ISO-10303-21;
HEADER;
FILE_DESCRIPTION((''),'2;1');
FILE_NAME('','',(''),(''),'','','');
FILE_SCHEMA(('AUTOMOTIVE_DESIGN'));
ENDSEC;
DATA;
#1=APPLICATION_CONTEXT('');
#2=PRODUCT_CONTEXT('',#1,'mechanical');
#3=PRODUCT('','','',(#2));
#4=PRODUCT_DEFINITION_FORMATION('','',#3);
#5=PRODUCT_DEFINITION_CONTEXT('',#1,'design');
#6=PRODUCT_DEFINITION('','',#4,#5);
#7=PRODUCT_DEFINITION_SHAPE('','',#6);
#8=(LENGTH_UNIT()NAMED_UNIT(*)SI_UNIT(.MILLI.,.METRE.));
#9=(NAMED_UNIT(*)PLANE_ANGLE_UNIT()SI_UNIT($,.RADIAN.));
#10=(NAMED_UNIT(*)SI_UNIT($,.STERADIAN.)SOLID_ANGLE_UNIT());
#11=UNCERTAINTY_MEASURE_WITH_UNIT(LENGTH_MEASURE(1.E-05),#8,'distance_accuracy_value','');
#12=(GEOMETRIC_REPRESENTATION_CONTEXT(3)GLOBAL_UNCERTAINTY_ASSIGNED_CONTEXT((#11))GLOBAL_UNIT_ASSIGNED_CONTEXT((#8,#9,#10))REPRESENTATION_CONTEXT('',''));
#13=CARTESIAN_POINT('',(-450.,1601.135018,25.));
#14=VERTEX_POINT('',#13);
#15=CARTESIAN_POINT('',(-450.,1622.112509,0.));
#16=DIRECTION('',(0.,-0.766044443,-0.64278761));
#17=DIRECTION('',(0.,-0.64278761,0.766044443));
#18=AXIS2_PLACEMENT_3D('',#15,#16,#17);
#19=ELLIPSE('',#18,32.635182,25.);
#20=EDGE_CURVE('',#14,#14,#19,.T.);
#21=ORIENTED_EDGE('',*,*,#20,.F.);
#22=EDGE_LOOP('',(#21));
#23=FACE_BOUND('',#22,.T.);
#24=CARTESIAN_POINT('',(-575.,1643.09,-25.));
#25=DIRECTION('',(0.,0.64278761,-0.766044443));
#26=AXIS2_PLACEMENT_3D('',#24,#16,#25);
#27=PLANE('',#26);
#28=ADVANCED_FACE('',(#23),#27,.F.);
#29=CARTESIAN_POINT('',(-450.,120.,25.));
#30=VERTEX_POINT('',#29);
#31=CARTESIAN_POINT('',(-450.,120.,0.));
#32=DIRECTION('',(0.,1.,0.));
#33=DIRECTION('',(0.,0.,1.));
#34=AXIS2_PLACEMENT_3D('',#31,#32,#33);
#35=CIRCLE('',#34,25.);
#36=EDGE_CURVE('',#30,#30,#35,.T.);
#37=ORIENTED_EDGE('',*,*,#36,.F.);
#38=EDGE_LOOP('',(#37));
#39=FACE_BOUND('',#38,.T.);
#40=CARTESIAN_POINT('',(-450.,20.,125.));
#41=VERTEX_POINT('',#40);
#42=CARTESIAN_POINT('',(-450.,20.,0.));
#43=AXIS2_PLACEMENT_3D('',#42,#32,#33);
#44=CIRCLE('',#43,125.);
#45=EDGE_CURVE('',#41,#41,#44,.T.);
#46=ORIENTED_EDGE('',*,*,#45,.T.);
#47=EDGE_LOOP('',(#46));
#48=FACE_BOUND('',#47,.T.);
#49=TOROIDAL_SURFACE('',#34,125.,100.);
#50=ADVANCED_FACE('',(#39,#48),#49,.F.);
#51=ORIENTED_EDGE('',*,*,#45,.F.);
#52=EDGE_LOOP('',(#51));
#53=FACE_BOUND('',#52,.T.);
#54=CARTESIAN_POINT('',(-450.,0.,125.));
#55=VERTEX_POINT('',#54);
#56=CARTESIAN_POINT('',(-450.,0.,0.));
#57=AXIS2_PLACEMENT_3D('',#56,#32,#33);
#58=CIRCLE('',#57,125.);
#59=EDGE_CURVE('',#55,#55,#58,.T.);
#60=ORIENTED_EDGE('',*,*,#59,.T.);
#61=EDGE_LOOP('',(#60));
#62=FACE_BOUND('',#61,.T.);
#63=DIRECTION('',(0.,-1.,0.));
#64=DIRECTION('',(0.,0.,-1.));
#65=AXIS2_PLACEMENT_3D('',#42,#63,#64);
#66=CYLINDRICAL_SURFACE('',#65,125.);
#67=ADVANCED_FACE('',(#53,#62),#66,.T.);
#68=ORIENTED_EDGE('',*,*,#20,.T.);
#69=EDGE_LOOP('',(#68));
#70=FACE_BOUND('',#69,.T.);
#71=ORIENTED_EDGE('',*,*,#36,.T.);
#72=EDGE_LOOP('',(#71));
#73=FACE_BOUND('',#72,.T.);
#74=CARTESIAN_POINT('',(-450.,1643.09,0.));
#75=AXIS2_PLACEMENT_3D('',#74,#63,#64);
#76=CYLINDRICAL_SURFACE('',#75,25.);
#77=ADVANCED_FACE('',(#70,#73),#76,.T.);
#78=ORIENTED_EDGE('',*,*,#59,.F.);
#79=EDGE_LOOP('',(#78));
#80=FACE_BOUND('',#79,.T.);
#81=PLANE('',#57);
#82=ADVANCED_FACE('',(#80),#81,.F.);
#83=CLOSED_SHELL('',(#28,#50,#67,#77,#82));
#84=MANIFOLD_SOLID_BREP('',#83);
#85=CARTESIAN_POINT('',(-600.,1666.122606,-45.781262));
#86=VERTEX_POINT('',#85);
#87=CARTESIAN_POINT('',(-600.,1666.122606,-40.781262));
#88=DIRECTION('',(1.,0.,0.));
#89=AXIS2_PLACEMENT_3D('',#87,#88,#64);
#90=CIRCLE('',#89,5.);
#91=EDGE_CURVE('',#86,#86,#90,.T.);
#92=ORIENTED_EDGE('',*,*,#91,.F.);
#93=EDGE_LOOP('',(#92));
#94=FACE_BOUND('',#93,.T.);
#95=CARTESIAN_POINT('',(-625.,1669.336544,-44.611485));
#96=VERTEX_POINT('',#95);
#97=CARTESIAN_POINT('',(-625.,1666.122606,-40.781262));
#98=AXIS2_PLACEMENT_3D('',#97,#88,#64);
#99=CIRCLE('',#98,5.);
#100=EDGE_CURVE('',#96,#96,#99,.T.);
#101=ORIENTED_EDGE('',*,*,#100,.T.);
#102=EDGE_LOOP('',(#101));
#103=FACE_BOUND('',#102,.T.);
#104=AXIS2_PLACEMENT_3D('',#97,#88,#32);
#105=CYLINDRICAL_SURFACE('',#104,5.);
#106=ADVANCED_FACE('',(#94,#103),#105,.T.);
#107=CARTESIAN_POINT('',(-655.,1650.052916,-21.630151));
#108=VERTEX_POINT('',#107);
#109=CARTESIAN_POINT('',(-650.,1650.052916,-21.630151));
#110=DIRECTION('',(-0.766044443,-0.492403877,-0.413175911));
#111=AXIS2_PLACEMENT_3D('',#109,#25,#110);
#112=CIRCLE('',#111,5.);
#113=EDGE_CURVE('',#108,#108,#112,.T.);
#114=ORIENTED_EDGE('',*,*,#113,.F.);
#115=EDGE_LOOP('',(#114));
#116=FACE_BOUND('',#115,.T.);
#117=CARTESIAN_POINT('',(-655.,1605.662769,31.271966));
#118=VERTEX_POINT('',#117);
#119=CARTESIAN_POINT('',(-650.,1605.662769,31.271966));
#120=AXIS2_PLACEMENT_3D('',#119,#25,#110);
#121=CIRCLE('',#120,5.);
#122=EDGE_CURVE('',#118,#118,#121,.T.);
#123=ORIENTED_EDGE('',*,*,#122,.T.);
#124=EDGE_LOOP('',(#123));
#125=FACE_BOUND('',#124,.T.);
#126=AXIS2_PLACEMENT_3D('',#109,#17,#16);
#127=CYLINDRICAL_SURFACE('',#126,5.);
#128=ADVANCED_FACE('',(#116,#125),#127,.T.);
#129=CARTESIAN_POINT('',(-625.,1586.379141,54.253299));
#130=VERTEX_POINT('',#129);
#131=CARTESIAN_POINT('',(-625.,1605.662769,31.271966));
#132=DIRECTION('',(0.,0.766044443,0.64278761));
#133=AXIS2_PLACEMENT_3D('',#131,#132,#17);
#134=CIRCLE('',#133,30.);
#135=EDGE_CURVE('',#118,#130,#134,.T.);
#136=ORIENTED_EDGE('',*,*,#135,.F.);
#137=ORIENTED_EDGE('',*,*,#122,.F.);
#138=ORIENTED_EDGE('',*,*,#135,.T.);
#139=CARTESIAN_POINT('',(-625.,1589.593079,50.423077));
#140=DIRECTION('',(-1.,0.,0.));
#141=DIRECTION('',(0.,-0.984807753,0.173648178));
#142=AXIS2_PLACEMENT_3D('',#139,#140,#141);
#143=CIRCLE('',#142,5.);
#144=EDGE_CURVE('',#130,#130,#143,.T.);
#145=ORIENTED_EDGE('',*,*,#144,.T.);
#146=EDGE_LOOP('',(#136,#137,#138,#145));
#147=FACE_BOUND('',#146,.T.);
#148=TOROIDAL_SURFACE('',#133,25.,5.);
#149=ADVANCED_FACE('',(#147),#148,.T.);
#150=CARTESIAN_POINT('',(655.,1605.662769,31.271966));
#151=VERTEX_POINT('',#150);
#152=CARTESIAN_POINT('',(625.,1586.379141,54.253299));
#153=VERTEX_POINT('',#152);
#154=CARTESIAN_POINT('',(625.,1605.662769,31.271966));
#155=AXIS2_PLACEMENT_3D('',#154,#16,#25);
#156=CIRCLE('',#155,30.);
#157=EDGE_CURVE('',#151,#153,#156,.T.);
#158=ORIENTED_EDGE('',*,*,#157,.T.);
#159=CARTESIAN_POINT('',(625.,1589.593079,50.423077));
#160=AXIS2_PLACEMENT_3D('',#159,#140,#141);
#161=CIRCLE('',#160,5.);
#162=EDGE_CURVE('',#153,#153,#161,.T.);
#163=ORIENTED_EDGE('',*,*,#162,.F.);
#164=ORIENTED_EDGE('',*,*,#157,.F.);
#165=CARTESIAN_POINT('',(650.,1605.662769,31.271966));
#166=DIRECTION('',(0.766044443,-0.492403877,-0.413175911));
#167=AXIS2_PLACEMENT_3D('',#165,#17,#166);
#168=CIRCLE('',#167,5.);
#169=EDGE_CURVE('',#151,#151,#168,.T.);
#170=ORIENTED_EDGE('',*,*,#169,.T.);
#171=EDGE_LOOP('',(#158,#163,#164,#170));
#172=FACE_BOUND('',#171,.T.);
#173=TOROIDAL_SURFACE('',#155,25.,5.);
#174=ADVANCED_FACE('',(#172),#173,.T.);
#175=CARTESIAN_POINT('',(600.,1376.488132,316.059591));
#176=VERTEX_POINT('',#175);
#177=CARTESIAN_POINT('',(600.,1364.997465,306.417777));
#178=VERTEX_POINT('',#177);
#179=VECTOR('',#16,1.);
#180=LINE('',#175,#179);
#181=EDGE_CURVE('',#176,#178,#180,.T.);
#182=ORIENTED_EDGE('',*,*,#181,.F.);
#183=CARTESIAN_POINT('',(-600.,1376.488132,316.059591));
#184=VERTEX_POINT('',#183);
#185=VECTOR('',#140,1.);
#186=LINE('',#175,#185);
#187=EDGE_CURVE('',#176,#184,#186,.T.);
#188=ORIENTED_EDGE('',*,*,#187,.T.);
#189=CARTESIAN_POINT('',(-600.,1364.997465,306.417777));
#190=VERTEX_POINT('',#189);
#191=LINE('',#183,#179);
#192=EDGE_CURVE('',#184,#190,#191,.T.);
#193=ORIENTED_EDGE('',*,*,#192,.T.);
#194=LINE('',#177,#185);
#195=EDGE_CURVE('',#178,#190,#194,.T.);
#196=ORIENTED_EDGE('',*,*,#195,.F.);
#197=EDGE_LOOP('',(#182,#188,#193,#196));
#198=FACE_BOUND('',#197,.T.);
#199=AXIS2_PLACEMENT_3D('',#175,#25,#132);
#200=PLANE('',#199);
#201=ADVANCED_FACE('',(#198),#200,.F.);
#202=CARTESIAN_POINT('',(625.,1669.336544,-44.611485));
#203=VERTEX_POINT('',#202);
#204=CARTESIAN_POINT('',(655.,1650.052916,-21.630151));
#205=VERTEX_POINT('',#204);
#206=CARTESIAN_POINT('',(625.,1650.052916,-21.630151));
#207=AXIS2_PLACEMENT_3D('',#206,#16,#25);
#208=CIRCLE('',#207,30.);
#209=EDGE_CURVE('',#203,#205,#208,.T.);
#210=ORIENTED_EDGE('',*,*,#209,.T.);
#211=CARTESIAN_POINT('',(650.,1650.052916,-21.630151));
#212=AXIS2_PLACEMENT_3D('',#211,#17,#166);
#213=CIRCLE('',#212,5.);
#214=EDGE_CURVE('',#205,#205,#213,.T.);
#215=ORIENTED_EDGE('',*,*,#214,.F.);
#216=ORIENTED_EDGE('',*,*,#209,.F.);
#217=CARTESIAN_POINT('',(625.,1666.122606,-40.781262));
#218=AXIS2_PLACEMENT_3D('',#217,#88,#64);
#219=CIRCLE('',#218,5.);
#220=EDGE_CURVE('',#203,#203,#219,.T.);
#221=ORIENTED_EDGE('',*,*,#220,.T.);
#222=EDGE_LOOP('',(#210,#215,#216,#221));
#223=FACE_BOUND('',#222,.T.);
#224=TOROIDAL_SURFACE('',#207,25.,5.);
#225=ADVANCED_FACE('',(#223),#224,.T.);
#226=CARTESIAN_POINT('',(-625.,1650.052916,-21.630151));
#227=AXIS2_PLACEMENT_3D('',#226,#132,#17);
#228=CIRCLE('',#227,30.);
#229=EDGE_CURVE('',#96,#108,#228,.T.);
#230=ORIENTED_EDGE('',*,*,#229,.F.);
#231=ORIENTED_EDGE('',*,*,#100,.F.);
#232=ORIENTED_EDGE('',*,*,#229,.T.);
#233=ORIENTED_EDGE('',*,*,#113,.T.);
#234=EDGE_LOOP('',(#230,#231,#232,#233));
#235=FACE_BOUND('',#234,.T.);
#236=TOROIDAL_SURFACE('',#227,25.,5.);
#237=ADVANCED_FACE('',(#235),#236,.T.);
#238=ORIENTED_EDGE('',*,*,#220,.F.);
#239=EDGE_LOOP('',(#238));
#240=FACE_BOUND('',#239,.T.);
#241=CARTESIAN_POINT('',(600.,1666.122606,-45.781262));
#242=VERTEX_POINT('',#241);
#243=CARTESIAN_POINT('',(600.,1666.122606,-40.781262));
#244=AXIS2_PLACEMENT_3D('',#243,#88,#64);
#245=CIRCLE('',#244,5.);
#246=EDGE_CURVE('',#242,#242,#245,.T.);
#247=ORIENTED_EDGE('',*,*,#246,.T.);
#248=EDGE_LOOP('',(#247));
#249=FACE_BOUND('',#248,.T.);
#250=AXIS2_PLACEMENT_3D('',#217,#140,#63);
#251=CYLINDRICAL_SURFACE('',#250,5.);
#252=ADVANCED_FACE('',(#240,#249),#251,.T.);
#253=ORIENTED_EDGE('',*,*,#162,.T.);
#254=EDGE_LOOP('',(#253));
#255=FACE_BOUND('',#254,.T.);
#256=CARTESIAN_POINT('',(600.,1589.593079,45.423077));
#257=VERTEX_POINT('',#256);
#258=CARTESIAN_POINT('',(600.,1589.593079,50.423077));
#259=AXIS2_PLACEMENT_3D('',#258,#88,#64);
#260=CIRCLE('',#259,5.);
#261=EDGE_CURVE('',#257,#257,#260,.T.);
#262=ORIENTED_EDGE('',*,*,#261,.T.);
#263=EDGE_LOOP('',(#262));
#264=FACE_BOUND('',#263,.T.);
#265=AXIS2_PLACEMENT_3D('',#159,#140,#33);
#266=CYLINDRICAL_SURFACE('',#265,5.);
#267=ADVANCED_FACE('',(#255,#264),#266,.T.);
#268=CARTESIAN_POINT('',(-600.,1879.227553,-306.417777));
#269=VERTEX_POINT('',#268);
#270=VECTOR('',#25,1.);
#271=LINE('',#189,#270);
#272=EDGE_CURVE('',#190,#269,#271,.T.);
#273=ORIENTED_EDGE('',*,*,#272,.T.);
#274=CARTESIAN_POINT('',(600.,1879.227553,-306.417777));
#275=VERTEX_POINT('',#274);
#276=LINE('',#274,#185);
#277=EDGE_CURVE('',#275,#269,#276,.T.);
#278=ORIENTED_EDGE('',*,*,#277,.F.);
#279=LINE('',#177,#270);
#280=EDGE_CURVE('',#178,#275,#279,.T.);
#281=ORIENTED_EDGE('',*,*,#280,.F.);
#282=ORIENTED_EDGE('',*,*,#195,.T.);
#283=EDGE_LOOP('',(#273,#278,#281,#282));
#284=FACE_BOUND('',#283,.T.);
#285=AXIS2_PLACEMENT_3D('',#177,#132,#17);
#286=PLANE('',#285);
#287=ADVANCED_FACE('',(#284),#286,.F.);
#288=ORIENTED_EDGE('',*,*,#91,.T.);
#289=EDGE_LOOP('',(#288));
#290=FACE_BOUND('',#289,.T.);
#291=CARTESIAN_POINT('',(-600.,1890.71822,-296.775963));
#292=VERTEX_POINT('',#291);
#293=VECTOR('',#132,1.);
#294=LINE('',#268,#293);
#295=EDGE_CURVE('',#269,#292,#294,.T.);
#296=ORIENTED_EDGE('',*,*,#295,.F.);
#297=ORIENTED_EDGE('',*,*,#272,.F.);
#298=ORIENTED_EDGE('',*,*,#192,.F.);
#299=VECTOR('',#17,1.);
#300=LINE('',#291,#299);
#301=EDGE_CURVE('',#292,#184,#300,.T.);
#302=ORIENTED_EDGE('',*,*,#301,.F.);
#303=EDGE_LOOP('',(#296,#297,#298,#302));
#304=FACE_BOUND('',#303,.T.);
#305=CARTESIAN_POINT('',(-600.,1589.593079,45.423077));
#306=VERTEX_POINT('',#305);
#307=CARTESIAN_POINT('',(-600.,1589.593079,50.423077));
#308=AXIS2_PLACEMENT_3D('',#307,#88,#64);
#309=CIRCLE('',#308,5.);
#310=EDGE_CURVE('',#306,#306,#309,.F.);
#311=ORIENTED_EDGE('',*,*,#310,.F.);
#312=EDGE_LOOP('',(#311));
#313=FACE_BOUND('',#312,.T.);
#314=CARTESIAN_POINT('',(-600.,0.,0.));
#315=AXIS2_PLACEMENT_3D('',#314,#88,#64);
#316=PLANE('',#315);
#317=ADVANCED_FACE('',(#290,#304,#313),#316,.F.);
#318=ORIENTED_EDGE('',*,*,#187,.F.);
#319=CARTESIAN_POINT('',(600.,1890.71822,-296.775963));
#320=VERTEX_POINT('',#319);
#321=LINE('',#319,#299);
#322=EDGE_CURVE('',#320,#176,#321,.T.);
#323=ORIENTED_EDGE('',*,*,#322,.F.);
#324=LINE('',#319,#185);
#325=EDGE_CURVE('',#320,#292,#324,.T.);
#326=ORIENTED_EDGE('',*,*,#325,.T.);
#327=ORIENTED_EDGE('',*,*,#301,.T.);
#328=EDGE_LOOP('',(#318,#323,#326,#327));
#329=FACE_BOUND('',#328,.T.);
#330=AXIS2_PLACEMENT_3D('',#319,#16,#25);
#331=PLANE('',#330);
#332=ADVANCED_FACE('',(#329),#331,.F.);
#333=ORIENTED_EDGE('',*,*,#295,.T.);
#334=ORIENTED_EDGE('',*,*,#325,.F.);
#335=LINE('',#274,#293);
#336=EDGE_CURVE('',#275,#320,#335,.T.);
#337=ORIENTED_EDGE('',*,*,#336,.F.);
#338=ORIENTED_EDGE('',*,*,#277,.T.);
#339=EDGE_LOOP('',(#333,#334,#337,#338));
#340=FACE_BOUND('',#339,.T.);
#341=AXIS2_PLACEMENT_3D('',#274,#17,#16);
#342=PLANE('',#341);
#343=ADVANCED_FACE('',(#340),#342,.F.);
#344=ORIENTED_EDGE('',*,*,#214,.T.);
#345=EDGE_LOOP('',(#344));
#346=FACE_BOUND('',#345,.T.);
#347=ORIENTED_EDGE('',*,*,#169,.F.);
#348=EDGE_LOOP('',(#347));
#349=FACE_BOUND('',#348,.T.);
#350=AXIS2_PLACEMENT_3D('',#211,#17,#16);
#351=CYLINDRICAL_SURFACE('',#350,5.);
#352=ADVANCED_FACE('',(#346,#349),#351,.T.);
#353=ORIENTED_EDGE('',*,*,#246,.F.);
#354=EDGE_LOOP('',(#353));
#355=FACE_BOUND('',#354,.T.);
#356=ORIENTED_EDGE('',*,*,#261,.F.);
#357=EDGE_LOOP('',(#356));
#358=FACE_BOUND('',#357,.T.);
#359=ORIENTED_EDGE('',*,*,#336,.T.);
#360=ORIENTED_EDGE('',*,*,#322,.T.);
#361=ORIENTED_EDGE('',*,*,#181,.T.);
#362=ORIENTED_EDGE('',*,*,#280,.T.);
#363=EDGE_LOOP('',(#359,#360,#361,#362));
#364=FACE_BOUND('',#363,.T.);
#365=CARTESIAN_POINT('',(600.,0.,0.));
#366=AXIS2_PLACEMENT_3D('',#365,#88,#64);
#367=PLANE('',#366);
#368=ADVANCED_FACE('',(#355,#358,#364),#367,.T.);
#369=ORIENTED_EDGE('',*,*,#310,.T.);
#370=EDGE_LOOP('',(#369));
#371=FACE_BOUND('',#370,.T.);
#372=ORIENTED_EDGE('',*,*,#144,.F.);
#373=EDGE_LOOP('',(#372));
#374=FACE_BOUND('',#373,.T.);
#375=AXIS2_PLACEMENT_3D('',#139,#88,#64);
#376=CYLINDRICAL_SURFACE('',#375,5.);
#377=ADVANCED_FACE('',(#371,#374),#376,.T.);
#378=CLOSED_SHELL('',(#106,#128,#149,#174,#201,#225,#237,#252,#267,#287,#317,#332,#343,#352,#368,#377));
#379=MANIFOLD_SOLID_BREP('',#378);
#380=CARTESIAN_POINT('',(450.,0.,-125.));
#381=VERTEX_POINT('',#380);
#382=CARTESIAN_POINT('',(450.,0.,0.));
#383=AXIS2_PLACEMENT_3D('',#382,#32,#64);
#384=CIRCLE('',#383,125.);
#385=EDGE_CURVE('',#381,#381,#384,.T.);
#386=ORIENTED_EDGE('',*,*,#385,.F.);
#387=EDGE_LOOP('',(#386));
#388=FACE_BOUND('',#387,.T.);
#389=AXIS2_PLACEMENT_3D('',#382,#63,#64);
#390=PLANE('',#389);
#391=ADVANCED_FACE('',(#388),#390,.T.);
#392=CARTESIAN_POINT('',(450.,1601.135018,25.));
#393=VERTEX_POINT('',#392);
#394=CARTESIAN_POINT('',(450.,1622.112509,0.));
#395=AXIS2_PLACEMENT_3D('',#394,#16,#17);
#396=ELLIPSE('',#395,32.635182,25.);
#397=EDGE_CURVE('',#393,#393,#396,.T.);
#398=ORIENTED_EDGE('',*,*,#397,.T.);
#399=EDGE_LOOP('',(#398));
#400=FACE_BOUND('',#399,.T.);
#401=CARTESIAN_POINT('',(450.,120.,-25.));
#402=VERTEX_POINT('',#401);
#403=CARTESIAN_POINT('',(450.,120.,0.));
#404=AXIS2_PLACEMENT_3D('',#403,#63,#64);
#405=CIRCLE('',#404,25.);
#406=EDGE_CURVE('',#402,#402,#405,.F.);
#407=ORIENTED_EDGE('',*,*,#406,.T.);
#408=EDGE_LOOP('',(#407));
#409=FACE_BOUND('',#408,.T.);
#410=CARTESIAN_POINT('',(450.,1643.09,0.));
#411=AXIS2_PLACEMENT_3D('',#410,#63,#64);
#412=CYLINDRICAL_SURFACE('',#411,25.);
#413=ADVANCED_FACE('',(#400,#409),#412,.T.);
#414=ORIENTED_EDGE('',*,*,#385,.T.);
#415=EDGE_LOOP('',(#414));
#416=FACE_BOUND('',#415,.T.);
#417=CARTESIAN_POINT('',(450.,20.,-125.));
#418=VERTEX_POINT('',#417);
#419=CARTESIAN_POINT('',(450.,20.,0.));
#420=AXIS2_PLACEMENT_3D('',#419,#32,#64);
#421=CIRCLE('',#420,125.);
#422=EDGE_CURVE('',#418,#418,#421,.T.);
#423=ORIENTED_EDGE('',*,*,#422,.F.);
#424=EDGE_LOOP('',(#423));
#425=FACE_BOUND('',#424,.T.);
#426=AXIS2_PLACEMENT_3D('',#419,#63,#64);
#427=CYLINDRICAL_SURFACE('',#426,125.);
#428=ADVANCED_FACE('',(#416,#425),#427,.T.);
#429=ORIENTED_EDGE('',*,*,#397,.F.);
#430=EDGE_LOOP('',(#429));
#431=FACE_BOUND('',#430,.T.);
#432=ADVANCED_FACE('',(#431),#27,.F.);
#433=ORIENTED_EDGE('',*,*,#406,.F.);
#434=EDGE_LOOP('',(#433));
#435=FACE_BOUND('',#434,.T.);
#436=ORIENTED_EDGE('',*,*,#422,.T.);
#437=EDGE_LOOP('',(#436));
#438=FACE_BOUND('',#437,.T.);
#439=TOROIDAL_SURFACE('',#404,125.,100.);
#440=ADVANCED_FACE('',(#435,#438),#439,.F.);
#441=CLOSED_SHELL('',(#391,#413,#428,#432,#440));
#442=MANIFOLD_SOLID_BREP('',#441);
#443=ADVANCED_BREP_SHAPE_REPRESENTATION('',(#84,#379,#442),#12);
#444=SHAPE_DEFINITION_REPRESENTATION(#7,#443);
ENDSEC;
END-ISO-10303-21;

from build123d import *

# Parameters (mm, degrees)
CROQUIS1_R                 = 125
SALIENTE_EXTRUIR1_DEPTH    = 20
SALIENTE_EXTRUIR1_2_DEPTH  = 20
CROQUIS2_R                 = 25
SALIENTE_EXTRUIR2_DEPTH    = 1623.09
REDONDEO1_R                = 100
REDONDEO2_R                = 100
CORTAR_EXTRUIR1_DEPTH      = 1746.277842666
CORTAR_EXTRUIR1_DEPTH_BACK = 1746.277842666
SALIENTE_EXTRUIR3_DEPTH    = 600
CROQUIS9_R                 = 5


with BuildPart() as part:
    # Croquis1 → Saliente-Extruir1 (new body)
    with BuildSketch(Plane(origin=(0, 0, 0), x_dir=(1, 0, 0), z_dir=(0, 1, 0))):
        with Locations(Location((-450, 0, 0), (0, 0, 270))):
            Circle(CROQUIS1_R)
    extrude(amount=SALIENTE_EXTRUIR1_DEPTH)



with BuildPart() as body_2:
    # Croquis1 → Saliente-Extruir1 2 (new body)
    with BuildSketch(Plane(origin=(0, 0, 0), x_dir=(1, 0, 0), z_dir=(0, 1, 0))):
        with Locations(Location((450, 0, 0), (0, 0, 90))):
            Circle(CROQUIS1_R)
    extrude(amount=SALIENTE_EXTRUIR1_2_DEPTH)


with BuildPart() as part_1:
    add(part.part)

    add(body_2.part)  # Saliente-Extruir2 merges body 2
    # Croquis2 → Saliente-Extruir2 (add)
    with BuildSketch(Plane(origin=(0, 20, 0), x_dir=(1, 0, 0), z_dir=(0, 1, 0))):
        with Locations(Location((-450, 0, 0), (0, 0, 90))):
            Circle(CROQUIS2_R)
        with Locations(Location((450, 0, 0), (0, 0, 90))):
            Circle(CROQUIS2_R)
    extrude(amount=SALIENTE_EXTRUIR2_DEPTH)

    # Redondeo1
    redondeo1_edges = [part_1.edges().sort_by_distance(p)[0] for p in [
        (-450, 20, 25),
    ]]
    fillet(redondeo1_edges, radius=REDONDEO1_R - 0.0001)  # a hair under: the kernel refuses the full size

    # Redondeo2
    redondeo2_edges = [part_1.edges().sort_by_distance(p)[0] for p in [
        (450, 20, 25),
    ]]
    fillet(redondeo2_edges, radius=REDONDEO2_R - 0.0001)  # a hair under: the kernel refuses the full size

    # Croquis5 → Cortar-Extruir1 (cut, two sides: drawn at the far end of the back side and taken through both)
    with BuildSketch(Plane(origin=(0, 0, 0), x_dir=(0, 0, -1), z_dir=(1, 0, 0)).offset(-CORTAR_EXTRUIR1_DEPTH_BACK)):
        Polygon((25, 1643.09), (-25, 1601.135018441), (-25, 1643.09), align=None)
    extrude(amount=CORTAR_EXTRUIR1_DEPTH + CORTAR_EXTRUIR1_DEPTH_BACK, mode=Mode.SUBTRACT)


with BuildPart() as body_2_2:
    # Croquis3 → Saliente-Extruir3 (new, symmetric)
    with BuildSketch(Plane(origin=(0, 0, 0), x_dir=(0, 0, -1), z_dir=(1, 0, 0))):
        Polygon((-306.417777248, 1364.997465346), (306.417777248, 1879.227553095), (296.775963102, 1890.718219742), (-316.059591393, 1376.488131993), align=None)
    extrude(amount=SALIENTE_EXTRUIR3_DEPTH, both=True)

    # Barrer1: sweep along a path in Croquis10
    with BuildLine(Plane(origin=(0, 963.385361856, 808.376301815), x_dir=(1, 0, 0), z_dir=(0, 0.7660444431189809, 0.6427876096865359))) as barrer1_path:
        Line((600, 1102.203226943), (625, 1102.203226943))
        ThreePointArc((625, 1102.203226943), (642.67766953, 1094.880896473), (650, 1077.203226943))
        Line((650, 1077.203226943), (650, 1008.144417946))
        ThreePointArc((650, 1008.144417946), (642.67766953, 990.466748416), (625, 983.144417946))
        Line((625, 983.144417946), (600, 983.144417946))
    # Croquis9 → Barrer1 (sweep)
    with BuildSketch(Plane(origin=(600, 0, 0), x_dir=(0, 0, -1), z_dir=(1, 0, 0))):
        with Locations((40.781262446, 1666.122606168)):
            Circle(CROQUIS9_R)
    barrer1 = sweep(path=barrer1_path.line)

    # Simetría1: Barrer1 across plane
    add(barrer1.mirror(Plane(origin=(0, 0, 0), x_dir=(0, 0, 1), z_dir=(1, 0, 0))))


solid = Compound([part_1.part, body_2_2.part])
